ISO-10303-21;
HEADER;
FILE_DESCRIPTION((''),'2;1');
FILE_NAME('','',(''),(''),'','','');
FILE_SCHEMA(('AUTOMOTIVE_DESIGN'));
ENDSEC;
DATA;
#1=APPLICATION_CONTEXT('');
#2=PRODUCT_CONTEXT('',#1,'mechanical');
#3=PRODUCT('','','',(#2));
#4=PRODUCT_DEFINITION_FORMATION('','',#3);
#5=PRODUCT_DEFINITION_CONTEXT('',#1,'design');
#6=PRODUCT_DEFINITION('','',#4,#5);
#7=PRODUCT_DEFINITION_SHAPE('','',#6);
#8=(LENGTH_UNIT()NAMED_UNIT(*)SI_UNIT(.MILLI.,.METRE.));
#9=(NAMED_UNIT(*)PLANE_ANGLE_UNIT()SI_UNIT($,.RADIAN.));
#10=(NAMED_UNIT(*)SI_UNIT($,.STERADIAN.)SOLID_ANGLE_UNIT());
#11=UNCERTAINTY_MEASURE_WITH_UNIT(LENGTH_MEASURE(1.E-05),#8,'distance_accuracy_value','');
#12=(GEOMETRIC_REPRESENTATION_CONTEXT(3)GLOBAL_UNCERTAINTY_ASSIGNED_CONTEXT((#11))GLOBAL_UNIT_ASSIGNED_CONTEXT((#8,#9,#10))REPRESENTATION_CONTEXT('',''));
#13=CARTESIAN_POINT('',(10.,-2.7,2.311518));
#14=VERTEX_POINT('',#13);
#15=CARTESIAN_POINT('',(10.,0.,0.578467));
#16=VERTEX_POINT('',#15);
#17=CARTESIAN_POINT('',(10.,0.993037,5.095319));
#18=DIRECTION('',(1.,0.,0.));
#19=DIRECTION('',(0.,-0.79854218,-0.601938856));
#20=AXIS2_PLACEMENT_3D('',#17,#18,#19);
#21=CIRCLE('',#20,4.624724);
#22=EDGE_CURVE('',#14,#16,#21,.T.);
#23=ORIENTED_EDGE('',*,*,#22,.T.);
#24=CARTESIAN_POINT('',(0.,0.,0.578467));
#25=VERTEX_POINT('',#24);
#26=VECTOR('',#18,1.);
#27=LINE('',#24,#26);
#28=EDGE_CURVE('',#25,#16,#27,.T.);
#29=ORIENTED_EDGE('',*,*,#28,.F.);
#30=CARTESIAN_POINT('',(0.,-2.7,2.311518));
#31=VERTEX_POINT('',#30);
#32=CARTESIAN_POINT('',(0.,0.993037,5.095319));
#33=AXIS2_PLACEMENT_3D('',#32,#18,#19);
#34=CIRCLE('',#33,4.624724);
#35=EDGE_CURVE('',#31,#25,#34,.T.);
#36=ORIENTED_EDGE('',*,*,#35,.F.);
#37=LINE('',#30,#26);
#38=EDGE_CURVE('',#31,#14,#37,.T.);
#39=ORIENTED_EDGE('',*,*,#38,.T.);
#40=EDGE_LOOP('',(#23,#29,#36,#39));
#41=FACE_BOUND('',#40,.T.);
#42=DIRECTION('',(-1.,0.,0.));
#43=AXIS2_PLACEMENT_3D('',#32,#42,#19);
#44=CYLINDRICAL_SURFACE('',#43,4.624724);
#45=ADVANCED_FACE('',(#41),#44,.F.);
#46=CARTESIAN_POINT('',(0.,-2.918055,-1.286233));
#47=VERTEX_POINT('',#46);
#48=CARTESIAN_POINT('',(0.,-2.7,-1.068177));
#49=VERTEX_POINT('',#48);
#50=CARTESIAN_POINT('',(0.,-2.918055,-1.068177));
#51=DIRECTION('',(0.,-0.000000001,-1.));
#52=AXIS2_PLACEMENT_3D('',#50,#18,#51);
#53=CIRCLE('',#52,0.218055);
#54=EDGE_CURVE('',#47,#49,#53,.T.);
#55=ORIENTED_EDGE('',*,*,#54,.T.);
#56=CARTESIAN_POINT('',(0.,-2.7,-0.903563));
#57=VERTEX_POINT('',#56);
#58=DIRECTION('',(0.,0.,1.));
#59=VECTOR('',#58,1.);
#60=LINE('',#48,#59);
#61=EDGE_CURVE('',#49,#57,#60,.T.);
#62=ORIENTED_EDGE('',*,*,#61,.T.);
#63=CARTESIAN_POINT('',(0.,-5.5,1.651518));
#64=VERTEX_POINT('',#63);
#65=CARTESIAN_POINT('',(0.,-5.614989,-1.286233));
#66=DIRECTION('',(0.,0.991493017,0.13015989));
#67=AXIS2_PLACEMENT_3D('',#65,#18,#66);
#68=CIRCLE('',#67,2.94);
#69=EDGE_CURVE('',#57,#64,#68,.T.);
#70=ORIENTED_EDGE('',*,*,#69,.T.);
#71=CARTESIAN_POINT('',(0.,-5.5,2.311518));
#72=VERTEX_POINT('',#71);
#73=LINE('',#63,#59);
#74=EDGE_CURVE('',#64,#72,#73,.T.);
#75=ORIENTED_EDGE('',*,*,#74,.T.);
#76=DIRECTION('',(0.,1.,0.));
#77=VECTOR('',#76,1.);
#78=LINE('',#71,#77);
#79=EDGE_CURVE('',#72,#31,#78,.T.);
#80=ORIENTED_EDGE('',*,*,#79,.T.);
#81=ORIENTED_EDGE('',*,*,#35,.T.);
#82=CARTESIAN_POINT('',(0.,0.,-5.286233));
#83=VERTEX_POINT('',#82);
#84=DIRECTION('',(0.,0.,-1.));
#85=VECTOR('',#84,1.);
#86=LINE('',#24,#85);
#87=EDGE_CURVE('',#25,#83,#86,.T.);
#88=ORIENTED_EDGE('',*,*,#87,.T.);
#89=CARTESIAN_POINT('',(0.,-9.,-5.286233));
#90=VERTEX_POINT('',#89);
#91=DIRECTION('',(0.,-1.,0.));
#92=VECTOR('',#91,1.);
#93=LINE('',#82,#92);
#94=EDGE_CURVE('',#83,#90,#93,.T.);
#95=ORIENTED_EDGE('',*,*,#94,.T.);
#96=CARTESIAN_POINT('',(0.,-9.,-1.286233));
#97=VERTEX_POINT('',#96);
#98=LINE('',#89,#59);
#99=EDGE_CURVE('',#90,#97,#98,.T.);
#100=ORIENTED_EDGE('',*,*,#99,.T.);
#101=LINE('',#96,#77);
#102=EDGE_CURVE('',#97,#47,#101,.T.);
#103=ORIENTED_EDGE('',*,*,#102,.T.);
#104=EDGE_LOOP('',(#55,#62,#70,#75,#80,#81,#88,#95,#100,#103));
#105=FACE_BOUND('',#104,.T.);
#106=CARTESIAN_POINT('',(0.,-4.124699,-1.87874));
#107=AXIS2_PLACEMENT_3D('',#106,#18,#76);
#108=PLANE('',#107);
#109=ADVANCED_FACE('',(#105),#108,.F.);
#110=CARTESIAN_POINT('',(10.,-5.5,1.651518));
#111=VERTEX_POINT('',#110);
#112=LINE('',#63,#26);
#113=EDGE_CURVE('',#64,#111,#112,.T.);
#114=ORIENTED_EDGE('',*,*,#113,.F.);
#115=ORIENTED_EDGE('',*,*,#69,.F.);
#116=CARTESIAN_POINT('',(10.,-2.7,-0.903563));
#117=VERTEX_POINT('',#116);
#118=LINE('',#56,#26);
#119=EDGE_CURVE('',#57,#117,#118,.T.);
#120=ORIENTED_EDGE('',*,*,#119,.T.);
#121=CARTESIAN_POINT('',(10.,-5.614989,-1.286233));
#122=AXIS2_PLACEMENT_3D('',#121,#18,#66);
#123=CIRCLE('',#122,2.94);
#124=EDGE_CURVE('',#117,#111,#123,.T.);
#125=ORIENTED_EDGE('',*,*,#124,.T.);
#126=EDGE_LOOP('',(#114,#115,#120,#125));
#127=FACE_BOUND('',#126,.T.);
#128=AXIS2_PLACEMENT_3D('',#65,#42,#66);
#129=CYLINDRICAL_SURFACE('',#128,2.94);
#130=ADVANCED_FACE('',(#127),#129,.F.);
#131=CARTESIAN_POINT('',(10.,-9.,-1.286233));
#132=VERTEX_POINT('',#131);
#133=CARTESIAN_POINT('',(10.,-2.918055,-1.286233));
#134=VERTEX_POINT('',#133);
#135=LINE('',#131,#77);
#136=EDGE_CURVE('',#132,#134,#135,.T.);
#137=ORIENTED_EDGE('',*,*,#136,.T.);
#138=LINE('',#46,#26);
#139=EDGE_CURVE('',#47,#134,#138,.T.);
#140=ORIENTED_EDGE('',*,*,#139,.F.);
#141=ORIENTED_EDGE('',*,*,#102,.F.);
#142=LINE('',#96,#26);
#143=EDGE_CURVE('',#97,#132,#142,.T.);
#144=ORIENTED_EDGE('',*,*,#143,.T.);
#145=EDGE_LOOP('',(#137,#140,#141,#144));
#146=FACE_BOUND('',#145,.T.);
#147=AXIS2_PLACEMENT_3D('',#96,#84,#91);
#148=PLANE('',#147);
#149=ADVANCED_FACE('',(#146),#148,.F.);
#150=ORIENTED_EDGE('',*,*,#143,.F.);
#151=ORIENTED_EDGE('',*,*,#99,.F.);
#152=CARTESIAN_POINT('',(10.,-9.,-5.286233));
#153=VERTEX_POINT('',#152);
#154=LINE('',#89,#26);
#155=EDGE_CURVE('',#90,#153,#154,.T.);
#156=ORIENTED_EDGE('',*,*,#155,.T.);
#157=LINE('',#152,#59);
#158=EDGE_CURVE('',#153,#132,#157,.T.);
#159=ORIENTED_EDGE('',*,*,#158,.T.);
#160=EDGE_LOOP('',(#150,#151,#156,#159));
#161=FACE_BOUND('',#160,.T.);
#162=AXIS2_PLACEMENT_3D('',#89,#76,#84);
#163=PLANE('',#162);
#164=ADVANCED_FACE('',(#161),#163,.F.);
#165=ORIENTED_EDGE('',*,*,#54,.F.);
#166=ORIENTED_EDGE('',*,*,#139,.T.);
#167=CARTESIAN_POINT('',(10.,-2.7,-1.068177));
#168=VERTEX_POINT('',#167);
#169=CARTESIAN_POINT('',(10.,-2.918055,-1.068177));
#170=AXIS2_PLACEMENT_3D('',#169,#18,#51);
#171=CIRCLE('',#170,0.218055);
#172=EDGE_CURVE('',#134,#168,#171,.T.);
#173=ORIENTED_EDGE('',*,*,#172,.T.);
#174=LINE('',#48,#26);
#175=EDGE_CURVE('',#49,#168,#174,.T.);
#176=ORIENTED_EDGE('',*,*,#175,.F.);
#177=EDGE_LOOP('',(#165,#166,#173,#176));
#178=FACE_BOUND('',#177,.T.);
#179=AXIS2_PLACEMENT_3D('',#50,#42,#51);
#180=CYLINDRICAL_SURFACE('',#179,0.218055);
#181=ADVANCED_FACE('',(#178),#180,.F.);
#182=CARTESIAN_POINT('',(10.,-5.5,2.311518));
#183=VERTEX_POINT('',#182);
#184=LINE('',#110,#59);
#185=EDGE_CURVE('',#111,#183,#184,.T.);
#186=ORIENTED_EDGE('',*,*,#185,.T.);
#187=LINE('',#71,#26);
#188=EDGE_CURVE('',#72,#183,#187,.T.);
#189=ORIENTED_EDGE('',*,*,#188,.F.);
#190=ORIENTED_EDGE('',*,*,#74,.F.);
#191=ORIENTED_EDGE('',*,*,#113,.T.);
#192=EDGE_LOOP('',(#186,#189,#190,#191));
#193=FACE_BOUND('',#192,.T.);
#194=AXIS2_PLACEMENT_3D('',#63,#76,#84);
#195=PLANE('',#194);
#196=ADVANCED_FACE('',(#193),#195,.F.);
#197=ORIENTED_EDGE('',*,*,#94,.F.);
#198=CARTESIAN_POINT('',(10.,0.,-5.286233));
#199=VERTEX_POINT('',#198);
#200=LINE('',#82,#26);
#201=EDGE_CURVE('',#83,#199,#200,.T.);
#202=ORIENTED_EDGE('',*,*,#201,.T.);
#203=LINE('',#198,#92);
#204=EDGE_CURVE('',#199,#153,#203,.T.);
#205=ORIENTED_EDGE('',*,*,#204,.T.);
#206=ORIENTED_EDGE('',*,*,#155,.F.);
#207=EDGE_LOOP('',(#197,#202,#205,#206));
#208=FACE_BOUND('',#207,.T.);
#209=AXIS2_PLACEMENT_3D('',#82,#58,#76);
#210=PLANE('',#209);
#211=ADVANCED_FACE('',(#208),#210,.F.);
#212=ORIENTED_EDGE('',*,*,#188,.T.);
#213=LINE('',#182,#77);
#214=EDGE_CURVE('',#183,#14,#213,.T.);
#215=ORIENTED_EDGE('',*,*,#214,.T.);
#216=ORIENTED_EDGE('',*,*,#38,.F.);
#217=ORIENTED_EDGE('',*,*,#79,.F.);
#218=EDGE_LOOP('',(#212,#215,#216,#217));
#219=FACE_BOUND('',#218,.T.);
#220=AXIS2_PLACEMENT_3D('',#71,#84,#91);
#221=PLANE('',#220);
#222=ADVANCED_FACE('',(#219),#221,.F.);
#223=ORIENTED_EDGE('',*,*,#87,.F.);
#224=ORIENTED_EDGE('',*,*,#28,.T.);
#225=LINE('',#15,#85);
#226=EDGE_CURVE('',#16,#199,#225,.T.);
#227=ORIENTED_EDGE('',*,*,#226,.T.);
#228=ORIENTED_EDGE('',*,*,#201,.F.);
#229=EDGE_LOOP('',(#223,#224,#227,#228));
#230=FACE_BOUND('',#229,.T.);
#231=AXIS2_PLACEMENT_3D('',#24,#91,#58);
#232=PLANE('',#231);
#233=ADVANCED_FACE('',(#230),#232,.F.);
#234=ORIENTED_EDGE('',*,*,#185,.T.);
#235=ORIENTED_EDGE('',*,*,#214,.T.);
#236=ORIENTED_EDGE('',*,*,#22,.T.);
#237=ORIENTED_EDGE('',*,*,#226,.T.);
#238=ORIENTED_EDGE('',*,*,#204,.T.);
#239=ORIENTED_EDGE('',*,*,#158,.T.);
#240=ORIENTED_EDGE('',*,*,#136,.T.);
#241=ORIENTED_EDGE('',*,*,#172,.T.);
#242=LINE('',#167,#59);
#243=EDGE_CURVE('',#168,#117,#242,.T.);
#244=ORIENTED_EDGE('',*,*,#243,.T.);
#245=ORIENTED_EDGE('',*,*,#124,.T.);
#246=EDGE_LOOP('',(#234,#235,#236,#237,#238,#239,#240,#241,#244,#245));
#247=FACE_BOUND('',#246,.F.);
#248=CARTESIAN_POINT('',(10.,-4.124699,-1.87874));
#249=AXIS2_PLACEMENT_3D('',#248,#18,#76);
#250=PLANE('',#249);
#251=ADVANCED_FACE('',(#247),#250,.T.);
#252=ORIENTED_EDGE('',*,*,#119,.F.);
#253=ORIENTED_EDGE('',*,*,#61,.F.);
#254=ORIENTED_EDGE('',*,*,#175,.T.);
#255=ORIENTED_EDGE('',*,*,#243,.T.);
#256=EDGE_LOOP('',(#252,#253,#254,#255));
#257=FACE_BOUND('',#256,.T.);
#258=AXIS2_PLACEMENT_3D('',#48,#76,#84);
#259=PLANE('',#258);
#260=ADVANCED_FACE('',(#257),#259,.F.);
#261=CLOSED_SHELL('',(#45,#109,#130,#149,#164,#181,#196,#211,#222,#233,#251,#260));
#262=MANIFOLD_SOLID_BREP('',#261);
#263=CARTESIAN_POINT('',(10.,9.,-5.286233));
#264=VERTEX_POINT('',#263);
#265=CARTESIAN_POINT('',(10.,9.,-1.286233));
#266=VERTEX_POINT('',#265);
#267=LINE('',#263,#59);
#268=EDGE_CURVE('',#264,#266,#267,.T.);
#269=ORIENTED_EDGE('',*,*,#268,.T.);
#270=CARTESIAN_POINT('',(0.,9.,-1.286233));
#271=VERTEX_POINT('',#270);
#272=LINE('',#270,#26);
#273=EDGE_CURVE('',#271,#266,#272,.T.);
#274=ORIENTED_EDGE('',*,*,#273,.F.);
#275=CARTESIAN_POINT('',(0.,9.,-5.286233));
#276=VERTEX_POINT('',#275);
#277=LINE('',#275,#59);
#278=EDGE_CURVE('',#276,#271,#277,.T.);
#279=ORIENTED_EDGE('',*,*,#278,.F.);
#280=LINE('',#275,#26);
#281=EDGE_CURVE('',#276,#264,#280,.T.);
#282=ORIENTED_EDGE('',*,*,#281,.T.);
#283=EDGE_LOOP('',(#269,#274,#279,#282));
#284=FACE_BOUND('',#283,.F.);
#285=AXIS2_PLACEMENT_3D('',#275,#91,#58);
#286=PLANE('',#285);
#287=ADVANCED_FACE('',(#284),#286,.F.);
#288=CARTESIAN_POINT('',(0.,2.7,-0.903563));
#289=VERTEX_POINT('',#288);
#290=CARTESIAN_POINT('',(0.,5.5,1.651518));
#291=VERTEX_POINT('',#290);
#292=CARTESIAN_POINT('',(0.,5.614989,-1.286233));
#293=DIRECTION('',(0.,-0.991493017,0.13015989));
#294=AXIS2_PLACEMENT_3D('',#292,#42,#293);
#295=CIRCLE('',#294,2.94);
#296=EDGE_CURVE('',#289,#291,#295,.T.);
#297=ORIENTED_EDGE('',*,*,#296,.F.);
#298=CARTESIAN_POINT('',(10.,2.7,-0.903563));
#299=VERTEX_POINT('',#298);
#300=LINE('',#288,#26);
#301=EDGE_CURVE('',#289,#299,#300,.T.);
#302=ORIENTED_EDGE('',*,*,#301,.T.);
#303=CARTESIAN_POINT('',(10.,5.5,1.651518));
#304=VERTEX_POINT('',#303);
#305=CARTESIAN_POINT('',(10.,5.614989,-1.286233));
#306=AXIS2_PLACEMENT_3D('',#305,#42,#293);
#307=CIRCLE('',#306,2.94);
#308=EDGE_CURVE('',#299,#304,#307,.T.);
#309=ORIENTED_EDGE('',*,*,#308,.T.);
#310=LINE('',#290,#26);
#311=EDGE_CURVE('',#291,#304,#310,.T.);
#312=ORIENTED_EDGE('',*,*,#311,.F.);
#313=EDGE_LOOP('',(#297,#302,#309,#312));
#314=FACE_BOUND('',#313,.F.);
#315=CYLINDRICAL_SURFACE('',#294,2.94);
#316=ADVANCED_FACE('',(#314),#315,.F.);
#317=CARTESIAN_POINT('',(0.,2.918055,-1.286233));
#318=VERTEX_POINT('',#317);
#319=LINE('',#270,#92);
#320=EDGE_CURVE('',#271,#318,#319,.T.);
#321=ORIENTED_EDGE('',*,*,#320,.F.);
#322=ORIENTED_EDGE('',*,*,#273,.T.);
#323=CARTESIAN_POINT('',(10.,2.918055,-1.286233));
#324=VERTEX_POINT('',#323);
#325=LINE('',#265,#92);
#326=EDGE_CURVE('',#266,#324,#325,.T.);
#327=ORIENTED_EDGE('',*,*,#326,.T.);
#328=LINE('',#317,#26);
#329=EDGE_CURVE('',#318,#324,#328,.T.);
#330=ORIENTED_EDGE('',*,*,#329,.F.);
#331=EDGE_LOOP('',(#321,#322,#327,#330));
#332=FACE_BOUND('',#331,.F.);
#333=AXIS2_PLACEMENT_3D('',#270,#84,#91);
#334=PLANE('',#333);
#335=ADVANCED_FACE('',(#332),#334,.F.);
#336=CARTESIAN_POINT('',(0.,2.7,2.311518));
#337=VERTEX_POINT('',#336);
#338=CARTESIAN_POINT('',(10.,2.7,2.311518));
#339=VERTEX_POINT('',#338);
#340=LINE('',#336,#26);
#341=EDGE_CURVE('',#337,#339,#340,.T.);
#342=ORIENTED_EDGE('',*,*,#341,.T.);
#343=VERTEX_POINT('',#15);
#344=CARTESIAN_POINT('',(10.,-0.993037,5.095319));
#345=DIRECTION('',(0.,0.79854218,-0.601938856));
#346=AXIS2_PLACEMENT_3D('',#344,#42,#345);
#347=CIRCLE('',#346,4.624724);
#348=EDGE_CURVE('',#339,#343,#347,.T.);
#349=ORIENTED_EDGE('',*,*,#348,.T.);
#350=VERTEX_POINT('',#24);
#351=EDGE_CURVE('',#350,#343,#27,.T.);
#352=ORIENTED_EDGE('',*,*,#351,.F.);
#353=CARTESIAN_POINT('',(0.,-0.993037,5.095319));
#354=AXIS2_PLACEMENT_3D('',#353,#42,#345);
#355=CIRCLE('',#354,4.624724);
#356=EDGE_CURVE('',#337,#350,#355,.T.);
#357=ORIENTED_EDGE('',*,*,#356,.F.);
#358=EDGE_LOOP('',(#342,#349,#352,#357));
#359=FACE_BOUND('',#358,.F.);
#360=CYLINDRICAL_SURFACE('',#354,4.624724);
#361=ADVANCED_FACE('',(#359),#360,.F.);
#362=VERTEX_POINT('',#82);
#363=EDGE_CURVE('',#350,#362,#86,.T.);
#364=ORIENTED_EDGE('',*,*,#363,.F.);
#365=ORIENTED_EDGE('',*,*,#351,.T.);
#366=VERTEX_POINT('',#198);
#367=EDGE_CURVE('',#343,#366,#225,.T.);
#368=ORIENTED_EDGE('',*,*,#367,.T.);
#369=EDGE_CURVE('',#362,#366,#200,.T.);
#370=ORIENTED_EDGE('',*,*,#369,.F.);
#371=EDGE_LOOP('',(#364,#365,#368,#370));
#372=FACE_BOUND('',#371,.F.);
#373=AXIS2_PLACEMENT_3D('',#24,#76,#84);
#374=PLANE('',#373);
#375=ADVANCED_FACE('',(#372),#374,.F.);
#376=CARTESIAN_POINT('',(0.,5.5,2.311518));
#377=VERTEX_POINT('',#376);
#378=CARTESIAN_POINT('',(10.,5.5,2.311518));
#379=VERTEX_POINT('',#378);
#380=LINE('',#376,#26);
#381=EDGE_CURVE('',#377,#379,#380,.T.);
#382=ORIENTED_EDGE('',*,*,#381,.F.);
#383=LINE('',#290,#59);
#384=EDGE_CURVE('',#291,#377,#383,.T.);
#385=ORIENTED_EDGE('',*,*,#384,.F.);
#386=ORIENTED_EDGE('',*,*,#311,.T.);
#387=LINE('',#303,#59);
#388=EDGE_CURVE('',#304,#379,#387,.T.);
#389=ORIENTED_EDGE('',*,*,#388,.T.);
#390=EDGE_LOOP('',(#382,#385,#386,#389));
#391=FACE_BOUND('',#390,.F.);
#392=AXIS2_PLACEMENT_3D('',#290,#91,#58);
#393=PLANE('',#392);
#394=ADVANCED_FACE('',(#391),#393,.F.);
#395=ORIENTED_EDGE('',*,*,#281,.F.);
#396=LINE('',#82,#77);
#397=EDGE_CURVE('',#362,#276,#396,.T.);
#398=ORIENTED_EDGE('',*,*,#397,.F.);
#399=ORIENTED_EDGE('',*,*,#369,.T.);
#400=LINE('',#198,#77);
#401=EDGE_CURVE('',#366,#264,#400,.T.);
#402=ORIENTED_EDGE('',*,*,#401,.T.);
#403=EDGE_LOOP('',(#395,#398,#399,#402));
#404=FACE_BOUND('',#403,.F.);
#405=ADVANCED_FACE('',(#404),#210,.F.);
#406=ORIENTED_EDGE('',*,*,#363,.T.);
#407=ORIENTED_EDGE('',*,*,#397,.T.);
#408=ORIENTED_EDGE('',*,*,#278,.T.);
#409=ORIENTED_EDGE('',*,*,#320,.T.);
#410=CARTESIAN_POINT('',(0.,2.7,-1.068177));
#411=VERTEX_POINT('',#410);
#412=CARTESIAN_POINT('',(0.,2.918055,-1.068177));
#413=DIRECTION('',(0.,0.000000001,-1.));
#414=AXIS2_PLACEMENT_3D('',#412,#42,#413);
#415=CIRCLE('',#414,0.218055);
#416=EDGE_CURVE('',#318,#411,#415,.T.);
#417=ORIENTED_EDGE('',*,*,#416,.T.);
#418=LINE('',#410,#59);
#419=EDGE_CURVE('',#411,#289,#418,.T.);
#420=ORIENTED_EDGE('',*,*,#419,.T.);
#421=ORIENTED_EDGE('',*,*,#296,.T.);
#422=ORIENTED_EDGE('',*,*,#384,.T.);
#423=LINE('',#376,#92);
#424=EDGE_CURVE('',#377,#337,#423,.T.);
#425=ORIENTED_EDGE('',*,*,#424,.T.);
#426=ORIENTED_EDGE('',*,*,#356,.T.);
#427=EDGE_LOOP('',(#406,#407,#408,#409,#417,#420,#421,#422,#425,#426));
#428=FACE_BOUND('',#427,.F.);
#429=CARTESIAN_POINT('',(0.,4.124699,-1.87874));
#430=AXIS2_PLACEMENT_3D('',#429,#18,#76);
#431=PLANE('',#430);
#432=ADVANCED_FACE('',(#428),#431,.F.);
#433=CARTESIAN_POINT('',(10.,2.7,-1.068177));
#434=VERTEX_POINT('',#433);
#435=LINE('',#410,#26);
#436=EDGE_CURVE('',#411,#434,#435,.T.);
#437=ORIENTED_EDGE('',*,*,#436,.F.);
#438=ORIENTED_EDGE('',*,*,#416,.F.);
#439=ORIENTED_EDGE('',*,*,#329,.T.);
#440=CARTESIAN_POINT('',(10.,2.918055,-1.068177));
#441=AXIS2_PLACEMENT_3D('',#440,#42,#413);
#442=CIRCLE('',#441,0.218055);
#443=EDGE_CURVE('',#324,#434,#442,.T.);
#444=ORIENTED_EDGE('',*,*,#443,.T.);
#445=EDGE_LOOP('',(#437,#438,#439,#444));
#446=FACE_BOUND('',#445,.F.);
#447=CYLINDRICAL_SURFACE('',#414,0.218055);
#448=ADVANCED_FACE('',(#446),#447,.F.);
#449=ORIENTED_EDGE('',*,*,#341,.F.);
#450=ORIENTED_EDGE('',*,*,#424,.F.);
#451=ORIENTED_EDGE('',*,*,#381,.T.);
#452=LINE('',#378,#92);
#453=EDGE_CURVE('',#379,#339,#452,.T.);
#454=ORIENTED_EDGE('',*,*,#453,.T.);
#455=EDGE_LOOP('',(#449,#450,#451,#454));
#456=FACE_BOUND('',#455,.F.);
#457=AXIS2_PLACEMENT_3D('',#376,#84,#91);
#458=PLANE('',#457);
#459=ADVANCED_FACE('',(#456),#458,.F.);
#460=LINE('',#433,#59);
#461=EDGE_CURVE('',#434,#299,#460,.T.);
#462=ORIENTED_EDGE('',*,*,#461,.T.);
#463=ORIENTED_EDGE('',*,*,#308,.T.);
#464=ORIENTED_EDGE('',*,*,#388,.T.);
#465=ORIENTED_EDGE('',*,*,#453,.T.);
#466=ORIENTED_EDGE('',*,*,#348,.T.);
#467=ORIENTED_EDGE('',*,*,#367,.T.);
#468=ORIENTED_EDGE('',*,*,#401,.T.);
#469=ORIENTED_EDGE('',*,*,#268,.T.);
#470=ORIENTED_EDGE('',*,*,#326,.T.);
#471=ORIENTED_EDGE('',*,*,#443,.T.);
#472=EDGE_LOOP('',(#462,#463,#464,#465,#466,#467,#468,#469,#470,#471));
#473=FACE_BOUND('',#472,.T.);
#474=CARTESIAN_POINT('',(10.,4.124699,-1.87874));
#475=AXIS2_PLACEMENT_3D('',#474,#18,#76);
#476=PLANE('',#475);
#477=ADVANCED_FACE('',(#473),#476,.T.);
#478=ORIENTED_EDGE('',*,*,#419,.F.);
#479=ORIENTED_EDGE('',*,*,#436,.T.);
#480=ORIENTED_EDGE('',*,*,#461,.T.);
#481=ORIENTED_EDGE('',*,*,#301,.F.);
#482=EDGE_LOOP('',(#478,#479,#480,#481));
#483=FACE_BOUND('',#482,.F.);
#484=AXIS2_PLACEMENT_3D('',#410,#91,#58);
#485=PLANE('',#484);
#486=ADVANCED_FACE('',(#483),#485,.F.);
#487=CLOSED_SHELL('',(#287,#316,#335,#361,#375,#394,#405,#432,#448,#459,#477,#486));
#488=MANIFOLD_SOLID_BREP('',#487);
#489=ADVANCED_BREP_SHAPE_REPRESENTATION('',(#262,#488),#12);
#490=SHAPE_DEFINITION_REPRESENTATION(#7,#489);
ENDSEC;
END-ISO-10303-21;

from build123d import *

# Parameters (mm, degrees)
F1_DEPTH = 10


# Not quite as in the source:
# - a pattern or mirror of a feature is missing from the dataset's text; its kind, count and spacing are read off the source's solid


with BuildPart() as f1:
    # F0 (on Right) → F1 (new body)
    with BuildSketch(Plane.YZ):
        with BuildLine():
            Line((5.5, 2.3115177173), (2.7, 2.3115177173))
            ThreePointArc((2.7, 2.3115177173), (1.5050999961, 1.2033549585), (0, 0.5784671916))
            Line((0, 0.5784671916), (0, -5.2862326842))
            Line((0, -5.2862326842), (9, -5.2862326842))
            Line((9, -5.2862326842), (9, -1.2862326842))
            Line((9, -1.2862326842), (2.9180552616, -1.2862326842))
            ThreePointArc((2.9180552616, -1.2862326842), (2.7638669074, -1.2223657768), (2.7, -1.0681774227))
            Line((2.7, -1.0681774227), (2.7, -0.9035626068))
            ThreePointArc((2.7, -0.9035626068), (3.6332473174, 0.8854712641), (5.5, 1.6515177173))
            Line((5.5, 1.6515177173), (5.5, 2.3115177173))
        make_face()
    extrude(amount=F1_DEPTH)


with BuildPart() as f1_copies_1:
    # F1_copies: instance of F1
    add(f1.part.mirror(Plane(origin=(0, 0, 0), x_dir=(0, 0, -1), z_dir=(0, -1, 0))))


solid = Compound([f1.part, f1_copies_1.part])
